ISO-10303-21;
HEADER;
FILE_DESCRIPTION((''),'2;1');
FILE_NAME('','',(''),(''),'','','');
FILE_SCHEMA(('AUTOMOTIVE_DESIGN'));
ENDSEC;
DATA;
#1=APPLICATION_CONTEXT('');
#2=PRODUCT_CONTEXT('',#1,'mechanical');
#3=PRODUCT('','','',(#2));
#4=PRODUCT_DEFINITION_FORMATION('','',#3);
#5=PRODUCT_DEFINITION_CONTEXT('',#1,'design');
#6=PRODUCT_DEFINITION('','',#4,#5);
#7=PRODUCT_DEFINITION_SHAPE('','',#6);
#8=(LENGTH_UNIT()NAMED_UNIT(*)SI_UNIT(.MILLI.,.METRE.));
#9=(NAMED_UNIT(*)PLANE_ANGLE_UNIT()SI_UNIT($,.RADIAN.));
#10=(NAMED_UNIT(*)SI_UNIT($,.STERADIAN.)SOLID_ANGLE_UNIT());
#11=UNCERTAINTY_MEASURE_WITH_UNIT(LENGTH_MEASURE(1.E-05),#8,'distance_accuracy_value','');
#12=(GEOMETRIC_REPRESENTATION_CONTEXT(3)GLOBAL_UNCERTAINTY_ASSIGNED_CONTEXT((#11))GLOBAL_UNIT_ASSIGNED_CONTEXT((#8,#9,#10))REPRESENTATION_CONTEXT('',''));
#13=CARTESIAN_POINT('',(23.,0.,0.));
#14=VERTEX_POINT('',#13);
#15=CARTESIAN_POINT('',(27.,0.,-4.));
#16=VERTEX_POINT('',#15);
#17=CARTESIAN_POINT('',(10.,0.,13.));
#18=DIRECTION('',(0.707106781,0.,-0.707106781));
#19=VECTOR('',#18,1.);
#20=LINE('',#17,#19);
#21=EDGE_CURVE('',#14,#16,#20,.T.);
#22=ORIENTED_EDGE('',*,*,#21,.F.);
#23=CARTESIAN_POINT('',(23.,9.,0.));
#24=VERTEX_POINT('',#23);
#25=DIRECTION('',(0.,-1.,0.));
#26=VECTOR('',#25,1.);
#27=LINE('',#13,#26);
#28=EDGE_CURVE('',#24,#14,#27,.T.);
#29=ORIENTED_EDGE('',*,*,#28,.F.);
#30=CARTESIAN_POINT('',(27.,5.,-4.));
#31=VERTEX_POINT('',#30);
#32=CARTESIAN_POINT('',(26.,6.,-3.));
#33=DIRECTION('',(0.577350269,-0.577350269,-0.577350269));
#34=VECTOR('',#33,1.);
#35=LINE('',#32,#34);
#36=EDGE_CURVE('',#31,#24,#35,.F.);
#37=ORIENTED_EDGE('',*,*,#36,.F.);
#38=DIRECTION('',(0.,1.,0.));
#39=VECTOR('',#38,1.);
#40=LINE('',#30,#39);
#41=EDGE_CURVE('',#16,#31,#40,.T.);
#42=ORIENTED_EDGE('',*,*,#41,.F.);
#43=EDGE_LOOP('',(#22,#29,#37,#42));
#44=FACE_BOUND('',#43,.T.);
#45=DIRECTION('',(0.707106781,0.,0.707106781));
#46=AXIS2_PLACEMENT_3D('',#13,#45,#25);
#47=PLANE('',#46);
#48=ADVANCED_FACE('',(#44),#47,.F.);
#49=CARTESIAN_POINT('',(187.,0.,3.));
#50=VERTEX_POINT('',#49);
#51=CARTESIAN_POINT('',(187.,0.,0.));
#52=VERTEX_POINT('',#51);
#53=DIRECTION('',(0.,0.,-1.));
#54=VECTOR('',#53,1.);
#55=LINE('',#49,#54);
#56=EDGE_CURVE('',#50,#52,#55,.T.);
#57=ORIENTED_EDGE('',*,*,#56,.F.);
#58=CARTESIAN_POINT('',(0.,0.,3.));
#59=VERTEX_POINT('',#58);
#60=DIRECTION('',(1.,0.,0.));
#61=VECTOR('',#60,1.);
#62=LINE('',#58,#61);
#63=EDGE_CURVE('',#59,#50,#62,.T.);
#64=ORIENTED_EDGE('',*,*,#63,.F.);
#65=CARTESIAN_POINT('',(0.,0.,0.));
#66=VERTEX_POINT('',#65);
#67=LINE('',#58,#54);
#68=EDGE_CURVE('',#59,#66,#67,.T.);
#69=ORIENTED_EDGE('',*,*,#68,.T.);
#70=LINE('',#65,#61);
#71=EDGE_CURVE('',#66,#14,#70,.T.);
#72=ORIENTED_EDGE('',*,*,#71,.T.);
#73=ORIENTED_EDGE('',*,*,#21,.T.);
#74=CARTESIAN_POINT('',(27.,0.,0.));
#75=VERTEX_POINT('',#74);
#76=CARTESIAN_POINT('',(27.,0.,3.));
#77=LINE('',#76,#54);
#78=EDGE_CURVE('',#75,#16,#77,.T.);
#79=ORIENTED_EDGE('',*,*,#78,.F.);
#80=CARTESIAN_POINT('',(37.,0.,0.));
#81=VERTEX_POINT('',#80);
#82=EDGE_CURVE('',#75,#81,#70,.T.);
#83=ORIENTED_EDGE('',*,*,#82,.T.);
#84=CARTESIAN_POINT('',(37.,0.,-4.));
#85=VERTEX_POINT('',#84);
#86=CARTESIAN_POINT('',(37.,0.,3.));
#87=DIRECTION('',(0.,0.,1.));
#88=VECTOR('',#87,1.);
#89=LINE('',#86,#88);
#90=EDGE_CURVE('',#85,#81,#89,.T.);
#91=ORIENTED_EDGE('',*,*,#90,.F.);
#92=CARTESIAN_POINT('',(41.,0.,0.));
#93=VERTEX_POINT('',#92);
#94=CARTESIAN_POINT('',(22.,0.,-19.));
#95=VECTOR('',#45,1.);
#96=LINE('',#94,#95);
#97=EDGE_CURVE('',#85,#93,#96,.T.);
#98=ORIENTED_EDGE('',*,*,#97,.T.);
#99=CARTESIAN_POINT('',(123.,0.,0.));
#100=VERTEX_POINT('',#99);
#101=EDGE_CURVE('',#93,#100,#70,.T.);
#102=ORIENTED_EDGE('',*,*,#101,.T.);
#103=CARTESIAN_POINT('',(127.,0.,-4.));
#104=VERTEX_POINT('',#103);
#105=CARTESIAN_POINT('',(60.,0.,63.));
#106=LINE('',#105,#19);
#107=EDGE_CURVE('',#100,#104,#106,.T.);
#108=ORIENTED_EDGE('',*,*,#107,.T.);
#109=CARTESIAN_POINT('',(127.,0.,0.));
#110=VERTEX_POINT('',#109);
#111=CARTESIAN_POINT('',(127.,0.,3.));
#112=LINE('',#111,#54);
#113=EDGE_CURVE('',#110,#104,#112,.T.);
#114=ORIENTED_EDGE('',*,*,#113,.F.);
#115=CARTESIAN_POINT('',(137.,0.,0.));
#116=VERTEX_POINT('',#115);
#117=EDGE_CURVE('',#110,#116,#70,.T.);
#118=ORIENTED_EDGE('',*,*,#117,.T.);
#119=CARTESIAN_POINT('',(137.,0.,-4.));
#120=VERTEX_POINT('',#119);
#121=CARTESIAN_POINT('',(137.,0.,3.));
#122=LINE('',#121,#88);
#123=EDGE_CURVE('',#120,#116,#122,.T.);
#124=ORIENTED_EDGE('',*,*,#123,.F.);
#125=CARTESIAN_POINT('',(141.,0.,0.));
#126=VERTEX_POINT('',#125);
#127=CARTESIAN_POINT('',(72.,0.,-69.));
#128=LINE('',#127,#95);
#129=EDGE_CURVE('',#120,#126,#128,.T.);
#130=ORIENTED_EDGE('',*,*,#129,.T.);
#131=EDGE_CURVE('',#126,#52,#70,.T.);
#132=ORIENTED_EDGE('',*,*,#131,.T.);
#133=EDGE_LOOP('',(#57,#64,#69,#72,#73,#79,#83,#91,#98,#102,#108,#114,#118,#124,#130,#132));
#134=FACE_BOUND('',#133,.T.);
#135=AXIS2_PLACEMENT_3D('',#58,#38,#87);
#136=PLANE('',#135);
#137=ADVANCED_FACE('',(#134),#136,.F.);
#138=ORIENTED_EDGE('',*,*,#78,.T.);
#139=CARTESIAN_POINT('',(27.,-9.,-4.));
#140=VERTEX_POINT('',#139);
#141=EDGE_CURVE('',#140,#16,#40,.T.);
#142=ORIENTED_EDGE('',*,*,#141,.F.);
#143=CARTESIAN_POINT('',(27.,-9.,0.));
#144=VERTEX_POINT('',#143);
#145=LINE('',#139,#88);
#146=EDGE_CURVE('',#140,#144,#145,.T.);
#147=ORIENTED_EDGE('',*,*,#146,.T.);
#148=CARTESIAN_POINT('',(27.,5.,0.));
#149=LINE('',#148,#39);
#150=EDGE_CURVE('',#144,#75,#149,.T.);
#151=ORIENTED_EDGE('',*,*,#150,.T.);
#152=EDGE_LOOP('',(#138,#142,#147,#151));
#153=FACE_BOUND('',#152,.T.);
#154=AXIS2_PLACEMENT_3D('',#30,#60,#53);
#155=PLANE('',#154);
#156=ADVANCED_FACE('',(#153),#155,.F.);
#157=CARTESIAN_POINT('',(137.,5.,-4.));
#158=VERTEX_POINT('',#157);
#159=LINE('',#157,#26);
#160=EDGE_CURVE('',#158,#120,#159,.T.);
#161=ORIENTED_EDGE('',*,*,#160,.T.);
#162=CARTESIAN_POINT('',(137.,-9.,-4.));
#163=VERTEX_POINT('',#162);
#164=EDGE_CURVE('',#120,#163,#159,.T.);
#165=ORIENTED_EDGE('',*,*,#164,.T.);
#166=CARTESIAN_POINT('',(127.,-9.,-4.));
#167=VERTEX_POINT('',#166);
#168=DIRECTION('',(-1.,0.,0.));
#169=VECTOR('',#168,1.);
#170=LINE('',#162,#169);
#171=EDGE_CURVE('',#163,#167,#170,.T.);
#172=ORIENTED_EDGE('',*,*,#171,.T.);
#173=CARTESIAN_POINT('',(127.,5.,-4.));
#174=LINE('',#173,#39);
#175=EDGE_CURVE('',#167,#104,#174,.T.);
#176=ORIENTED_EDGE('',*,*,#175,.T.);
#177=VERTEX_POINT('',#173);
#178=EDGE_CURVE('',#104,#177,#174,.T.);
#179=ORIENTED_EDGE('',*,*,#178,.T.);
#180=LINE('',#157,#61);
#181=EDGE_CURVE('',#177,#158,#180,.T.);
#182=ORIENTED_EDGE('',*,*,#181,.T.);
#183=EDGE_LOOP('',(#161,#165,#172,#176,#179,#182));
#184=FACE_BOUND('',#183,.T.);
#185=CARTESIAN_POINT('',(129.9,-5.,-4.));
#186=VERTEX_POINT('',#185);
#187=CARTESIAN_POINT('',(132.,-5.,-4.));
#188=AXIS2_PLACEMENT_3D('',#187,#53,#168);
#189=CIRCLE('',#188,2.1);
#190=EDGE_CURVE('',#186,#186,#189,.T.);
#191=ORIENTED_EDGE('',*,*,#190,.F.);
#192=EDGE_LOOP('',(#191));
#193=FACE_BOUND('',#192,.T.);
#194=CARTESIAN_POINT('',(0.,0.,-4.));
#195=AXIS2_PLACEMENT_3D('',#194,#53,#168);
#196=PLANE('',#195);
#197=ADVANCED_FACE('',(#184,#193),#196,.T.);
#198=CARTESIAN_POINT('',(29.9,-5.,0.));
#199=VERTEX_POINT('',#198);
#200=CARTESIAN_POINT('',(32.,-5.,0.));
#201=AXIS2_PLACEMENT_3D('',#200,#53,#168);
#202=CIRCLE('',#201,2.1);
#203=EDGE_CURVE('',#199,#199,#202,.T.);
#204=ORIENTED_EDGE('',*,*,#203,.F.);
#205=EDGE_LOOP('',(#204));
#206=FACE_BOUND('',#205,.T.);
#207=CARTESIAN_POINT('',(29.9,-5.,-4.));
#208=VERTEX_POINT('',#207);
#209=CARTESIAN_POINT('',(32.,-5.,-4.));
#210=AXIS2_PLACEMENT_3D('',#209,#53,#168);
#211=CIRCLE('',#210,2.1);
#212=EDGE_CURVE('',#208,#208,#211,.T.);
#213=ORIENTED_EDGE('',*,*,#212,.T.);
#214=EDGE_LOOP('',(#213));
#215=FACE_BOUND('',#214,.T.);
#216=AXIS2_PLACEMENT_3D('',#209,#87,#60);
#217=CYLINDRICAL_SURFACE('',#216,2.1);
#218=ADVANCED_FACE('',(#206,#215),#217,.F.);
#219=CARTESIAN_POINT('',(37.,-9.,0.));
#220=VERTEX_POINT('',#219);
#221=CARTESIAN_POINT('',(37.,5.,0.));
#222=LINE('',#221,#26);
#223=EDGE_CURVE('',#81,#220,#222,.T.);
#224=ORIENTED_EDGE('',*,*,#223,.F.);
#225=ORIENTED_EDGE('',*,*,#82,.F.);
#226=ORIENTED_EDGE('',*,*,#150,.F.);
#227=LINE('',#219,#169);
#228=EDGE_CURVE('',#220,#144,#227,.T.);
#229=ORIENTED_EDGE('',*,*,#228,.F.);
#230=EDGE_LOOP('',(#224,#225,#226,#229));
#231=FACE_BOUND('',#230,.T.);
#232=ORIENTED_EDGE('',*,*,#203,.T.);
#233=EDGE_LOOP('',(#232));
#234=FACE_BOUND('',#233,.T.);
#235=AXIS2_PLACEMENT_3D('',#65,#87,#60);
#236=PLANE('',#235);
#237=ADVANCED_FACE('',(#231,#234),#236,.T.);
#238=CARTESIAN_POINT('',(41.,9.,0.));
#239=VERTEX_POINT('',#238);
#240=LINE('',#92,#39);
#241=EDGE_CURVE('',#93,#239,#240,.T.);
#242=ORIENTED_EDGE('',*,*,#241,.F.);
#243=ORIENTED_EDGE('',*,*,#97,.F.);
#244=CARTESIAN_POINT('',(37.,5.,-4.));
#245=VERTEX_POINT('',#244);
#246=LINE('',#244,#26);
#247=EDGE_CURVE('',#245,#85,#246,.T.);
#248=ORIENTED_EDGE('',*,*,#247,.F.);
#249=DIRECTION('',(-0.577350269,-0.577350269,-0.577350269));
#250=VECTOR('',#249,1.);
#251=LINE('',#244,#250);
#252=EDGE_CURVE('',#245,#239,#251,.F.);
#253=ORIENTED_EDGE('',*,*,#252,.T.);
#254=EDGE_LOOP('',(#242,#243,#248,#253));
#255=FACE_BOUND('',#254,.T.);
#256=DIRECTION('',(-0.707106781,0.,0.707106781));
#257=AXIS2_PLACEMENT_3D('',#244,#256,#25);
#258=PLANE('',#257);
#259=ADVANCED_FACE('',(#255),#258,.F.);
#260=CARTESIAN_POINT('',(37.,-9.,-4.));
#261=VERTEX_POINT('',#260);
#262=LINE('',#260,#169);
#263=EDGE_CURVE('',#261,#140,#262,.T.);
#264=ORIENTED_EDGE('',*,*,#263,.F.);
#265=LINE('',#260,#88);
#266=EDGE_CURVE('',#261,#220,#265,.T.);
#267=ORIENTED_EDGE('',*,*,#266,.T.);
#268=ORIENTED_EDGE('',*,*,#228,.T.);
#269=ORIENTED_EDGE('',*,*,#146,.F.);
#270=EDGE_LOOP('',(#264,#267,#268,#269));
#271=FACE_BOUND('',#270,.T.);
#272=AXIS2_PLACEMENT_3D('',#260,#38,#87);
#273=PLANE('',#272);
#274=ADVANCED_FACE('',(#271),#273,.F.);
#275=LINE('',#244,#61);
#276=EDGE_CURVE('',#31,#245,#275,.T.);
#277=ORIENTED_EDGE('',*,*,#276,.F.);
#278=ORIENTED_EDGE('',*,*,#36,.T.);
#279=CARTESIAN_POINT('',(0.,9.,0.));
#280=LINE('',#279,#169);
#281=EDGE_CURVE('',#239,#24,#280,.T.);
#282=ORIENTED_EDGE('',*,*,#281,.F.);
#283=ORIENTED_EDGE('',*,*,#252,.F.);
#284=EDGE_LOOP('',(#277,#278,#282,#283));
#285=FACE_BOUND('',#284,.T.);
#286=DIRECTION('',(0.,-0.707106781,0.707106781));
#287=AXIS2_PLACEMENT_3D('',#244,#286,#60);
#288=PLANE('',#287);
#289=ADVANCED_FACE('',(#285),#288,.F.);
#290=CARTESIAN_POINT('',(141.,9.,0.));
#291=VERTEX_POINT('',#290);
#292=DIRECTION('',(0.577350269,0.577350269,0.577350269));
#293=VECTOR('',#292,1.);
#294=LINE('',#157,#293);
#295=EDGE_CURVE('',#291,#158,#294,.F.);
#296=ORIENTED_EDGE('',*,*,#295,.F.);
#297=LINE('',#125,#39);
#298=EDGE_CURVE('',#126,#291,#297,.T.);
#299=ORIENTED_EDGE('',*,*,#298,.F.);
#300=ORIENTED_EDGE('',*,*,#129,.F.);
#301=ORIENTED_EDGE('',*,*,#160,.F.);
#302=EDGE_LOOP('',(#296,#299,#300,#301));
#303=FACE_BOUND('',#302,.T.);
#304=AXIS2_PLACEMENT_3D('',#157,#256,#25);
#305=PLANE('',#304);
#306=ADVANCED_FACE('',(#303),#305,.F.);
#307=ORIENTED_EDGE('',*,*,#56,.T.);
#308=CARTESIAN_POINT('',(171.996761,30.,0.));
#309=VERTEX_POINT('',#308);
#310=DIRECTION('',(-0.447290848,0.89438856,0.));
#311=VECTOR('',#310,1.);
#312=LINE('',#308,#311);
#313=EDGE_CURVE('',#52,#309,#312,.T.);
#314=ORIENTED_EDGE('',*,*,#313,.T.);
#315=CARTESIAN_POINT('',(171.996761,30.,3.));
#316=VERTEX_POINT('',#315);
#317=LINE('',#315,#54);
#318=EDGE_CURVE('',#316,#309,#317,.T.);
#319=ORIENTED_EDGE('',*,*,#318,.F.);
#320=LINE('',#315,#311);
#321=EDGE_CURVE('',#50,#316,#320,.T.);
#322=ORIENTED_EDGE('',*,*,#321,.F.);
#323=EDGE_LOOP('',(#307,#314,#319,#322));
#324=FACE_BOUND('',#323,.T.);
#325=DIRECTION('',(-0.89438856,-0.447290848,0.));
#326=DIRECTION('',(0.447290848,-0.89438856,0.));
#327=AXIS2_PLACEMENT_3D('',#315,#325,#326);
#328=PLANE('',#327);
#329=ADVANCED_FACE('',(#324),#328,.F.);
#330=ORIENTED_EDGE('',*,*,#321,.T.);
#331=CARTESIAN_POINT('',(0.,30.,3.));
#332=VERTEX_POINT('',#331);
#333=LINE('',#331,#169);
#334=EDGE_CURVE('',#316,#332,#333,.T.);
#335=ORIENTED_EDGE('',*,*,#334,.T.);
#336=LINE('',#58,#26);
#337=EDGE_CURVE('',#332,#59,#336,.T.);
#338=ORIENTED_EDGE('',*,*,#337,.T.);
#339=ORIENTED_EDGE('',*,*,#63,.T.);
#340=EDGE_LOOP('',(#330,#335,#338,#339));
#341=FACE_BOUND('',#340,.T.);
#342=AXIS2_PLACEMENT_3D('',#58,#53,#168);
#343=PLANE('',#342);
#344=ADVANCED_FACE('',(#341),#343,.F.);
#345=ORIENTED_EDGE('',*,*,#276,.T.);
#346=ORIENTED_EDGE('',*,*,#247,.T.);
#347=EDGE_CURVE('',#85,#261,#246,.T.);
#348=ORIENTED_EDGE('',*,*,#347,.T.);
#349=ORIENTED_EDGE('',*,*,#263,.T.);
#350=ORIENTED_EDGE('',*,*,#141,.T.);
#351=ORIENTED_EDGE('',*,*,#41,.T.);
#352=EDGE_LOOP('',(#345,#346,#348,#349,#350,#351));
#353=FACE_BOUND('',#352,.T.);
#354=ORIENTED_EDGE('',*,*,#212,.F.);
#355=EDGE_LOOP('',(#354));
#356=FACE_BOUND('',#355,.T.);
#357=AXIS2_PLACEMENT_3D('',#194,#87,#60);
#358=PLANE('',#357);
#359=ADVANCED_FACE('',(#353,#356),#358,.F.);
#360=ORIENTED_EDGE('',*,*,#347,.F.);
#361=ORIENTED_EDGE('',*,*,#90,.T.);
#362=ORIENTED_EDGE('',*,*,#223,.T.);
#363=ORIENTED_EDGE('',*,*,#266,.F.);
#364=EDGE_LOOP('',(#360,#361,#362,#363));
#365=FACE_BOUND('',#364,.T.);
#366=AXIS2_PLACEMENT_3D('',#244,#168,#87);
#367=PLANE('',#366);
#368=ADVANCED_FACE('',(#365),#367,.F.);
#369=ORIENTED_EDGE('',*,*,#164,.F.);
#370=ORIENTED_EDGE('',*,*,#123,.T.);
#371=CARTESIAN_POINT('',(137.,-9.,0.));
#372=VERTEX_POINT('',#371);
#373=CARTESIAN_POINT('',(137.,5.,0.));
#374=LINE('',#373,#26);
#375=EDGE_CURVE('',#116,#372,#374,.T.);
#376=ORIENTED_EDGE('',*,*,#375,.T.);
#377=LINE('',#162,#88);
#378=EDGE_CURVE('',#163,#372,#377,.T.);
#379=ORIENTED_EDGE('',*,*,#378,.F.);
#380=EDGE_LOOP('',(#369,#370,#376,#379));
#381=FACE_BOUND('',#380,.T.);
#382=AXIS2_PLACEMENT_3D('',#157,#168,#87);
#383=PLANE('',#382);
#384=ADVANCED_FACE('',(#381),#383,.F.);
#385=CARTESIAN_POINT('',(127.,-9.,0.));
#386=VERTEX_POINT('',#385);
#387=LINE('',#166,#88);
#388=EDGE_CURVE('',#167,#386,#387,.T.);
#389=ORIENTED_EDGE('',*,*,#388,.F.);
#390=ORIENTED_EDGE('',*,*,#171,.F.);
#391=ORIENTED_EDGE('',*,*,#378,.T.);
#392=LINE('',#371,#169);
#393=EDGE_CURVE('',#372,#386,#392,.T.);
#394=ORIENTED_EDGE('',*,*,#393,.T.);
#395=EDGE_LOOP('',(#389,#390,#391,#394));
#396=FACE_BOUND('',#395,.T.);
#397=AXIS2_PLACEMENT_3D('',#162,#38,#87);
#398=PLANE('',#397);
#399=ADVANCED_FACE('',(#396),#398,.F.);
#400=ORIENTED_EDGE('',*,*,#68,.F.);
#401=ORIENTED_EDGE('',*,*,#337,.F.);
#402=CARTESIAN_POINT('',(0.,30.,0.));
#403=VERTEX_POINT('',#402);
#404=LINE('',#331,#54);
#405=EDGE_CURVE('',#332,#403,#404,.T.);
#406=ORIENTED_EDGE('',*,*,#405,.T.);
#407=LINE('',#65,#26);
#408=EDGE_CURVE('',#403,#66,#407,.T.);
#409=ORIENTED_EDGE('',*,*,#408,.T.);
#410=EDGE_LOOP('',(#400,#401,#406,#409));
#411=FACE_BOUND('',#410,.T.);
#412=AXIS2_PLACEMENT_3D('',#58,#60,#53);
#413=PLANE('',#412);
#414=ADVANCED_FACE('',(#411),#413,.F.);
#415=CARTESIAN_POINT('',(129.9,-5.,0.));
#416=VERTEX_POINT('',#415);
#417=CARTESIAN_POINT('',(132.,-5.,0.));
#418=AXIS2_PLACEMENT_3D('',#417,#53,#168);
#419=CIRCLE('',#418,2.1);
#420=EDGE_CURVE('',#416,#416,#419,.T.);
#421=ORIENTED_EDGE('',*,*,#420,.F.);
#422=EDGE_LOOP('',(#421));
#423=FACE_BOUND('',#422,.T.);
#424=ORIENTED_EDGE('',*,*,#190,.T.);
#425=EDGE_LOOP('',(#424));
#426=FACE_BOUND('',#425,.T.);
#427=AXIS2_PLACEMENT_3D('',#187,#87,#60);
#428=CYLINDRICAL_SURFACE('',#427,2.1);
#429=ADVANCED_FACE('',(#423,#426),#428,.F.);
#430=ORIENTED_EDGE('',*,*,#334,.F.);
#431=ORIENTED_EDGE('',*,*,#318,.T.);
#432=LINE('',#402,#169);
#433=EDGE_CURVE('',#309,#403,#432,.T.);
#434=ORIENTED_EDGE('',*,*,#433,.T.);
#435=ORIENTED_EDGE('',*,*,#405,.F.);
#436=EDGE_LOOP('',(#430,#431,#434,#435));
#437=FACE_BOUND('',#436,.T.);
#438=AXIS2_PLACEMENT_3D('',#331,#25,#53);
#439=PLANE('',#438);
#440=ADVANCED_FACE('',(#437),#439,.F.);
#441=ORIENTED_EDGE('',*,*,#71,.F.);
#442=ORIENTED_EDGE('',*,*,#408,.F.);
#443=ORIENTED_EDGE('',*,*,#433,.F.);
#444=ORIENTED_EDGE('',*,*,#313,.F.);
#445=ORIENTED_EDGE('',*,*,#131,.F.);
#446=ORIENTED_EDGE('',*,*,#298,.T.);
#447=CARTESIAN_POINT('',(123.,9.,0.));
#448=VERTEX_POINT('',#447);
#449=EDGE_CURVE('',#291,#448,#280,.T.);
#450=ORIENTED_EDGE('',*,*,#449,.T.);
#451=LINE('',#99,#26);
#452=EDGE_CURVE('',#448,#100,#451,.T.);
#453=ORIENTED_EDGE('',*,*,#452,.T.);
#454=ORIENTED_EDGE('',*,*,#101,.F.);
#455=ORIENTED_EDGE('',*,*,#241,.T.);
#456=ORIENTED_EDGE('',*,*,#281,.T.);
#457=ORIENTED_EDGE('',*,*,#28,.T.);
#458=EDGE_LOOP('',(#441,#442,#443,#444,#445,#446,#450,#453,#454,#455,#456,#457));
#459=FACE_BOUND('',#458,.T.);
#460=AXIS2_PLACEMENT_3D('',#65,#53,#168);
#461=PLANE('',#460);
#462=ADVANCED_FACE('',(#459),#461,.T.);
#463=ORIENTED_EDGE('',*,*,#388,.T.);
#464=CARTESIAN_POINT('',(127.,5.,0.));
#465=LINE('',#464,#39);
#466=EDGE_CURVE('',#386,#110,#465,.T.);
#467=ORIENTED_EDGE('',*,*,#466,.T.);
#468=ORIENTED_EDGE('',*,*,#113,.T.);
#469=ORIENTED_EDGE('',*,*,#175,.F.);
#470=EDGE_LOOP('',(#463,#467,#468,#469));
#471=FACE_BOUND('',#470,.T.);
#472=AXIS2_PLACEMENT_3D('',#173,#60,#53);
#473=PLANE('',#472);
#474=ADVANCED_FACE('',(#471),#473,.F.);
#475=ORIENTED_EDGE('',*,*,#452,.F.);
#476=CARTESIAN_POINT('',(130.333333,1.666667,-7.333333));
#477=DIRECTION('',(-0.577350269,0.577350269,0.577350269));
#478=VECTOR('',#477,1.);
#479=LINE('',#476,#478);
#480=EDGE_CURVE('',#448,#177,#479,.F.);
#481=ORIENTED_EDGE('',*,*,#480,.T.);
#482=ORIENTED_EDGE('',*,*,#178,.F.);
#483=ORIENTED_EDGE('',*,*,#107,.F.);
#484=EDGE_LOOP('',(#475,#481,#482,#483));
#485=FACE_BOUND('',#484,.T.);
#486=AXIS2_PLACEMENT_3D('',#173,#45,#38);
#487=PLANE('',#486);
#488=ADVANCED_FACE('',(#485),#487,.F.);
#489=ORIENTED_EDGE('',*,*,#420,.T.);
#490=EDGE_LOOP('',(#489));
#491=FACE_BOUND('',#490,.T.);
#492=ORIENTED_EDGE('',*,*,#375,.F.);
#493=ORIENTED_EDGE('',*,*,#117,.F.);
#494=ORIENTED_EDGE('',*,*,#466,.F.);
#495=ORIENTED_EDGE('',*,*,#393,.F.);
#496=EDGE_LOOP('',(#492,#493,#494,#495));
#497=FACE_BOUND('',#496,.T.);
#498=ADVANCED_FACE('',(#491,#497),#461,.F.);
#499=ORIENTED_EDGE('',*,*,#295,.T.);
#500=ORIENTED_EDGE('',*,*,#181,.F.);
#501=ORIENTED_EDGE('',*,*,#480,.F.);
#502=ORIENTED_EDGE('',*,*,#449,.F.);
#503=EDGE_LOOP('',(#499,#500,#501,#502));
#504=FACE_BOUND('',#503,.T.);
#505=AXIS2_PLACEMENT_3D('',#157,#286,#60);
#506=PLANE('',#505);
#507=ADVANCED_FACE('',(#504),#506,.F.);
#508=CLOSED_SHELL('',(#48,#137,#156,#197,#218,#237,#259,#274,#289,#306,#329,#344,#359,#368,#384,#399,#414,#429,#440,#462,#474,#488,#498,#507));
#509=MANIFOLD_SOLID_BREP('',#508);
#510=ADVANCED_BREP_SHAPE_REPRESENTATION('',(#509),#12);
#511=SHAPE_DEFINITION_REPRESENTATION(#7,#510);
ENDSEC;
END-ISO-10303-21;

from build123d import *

# Parameters (mm, degrees)
DODANIE_WYCI_GNI_CIE1_DEPTH = 3
SZKIC2_W                    = 10
SZKIC2_H                    = 14
SZKIC2_R                    = 2.1
DODANIE_WYCI_GNI_CIE2_DEPTH = 4
SFAZOWANIE1_SIZE            = 4


with BuildPart() as part:
    # Szkic1 → Dodanie-wyciągnięcie1 (new body)
    with BuildSketch(Plane.XY):
        Polygon((0, 0), (187, 0), (171.996760863, 30), (0, 30), align=None)
    extrude(amount=DODANIE_WYCI_GNI_CIE1_DEPTH)

    # Szkic2 → Dodanie-wyciągnięcie2 (add)
    # profile 1 of 2: a face of its own
    with BuildSketch(Plane(origin=(0, 0, 0), x_dir=(-1, 0, 0), z_dir=(0, 0, -1))):
        with Locations((-132, -2)):
            Rectangle(SZKIC2_W, SZKIC2_H)
        with Locations((-132, -5)):
            Circle(SZKIC2_R, mode=Mode.SUBTRACT)
    # profile 2 of 2: a face of its own
    with BuildSketch(Plane(origin=(0, 0, 0), x_dir=(-1, 0, 0), z_dir=(0, 0, -1))):
        with Locations((-32, -2)):
            Rectangle(SZKIC2_W, SZKIC2_H)
        with Locations((-32, -5)):
            Circle(SZKIC2_R, mode=Mode.SUBTRACT)
    extrude(amount=DODANIE_WYCI_GNI_CIE2_DEPTH)

    # Sfazowanie1
    sfazowanie1_edges = [part.edges().sort_by_distance(p)[0] for p in [
        (37, 2.5, 0),
        (32, 5, 0),
        (27, 2.5, 0),
        (127, 2.5, 0),
        (132, 5, 0),
        (137, 2.5, 0),
    ]]
    chamfer(sfazowanie1_edges, length=SFAZOWANIE1_SIZE - 0.0001)  # a hair under: the kernel refuses the full size


solid = part.part
